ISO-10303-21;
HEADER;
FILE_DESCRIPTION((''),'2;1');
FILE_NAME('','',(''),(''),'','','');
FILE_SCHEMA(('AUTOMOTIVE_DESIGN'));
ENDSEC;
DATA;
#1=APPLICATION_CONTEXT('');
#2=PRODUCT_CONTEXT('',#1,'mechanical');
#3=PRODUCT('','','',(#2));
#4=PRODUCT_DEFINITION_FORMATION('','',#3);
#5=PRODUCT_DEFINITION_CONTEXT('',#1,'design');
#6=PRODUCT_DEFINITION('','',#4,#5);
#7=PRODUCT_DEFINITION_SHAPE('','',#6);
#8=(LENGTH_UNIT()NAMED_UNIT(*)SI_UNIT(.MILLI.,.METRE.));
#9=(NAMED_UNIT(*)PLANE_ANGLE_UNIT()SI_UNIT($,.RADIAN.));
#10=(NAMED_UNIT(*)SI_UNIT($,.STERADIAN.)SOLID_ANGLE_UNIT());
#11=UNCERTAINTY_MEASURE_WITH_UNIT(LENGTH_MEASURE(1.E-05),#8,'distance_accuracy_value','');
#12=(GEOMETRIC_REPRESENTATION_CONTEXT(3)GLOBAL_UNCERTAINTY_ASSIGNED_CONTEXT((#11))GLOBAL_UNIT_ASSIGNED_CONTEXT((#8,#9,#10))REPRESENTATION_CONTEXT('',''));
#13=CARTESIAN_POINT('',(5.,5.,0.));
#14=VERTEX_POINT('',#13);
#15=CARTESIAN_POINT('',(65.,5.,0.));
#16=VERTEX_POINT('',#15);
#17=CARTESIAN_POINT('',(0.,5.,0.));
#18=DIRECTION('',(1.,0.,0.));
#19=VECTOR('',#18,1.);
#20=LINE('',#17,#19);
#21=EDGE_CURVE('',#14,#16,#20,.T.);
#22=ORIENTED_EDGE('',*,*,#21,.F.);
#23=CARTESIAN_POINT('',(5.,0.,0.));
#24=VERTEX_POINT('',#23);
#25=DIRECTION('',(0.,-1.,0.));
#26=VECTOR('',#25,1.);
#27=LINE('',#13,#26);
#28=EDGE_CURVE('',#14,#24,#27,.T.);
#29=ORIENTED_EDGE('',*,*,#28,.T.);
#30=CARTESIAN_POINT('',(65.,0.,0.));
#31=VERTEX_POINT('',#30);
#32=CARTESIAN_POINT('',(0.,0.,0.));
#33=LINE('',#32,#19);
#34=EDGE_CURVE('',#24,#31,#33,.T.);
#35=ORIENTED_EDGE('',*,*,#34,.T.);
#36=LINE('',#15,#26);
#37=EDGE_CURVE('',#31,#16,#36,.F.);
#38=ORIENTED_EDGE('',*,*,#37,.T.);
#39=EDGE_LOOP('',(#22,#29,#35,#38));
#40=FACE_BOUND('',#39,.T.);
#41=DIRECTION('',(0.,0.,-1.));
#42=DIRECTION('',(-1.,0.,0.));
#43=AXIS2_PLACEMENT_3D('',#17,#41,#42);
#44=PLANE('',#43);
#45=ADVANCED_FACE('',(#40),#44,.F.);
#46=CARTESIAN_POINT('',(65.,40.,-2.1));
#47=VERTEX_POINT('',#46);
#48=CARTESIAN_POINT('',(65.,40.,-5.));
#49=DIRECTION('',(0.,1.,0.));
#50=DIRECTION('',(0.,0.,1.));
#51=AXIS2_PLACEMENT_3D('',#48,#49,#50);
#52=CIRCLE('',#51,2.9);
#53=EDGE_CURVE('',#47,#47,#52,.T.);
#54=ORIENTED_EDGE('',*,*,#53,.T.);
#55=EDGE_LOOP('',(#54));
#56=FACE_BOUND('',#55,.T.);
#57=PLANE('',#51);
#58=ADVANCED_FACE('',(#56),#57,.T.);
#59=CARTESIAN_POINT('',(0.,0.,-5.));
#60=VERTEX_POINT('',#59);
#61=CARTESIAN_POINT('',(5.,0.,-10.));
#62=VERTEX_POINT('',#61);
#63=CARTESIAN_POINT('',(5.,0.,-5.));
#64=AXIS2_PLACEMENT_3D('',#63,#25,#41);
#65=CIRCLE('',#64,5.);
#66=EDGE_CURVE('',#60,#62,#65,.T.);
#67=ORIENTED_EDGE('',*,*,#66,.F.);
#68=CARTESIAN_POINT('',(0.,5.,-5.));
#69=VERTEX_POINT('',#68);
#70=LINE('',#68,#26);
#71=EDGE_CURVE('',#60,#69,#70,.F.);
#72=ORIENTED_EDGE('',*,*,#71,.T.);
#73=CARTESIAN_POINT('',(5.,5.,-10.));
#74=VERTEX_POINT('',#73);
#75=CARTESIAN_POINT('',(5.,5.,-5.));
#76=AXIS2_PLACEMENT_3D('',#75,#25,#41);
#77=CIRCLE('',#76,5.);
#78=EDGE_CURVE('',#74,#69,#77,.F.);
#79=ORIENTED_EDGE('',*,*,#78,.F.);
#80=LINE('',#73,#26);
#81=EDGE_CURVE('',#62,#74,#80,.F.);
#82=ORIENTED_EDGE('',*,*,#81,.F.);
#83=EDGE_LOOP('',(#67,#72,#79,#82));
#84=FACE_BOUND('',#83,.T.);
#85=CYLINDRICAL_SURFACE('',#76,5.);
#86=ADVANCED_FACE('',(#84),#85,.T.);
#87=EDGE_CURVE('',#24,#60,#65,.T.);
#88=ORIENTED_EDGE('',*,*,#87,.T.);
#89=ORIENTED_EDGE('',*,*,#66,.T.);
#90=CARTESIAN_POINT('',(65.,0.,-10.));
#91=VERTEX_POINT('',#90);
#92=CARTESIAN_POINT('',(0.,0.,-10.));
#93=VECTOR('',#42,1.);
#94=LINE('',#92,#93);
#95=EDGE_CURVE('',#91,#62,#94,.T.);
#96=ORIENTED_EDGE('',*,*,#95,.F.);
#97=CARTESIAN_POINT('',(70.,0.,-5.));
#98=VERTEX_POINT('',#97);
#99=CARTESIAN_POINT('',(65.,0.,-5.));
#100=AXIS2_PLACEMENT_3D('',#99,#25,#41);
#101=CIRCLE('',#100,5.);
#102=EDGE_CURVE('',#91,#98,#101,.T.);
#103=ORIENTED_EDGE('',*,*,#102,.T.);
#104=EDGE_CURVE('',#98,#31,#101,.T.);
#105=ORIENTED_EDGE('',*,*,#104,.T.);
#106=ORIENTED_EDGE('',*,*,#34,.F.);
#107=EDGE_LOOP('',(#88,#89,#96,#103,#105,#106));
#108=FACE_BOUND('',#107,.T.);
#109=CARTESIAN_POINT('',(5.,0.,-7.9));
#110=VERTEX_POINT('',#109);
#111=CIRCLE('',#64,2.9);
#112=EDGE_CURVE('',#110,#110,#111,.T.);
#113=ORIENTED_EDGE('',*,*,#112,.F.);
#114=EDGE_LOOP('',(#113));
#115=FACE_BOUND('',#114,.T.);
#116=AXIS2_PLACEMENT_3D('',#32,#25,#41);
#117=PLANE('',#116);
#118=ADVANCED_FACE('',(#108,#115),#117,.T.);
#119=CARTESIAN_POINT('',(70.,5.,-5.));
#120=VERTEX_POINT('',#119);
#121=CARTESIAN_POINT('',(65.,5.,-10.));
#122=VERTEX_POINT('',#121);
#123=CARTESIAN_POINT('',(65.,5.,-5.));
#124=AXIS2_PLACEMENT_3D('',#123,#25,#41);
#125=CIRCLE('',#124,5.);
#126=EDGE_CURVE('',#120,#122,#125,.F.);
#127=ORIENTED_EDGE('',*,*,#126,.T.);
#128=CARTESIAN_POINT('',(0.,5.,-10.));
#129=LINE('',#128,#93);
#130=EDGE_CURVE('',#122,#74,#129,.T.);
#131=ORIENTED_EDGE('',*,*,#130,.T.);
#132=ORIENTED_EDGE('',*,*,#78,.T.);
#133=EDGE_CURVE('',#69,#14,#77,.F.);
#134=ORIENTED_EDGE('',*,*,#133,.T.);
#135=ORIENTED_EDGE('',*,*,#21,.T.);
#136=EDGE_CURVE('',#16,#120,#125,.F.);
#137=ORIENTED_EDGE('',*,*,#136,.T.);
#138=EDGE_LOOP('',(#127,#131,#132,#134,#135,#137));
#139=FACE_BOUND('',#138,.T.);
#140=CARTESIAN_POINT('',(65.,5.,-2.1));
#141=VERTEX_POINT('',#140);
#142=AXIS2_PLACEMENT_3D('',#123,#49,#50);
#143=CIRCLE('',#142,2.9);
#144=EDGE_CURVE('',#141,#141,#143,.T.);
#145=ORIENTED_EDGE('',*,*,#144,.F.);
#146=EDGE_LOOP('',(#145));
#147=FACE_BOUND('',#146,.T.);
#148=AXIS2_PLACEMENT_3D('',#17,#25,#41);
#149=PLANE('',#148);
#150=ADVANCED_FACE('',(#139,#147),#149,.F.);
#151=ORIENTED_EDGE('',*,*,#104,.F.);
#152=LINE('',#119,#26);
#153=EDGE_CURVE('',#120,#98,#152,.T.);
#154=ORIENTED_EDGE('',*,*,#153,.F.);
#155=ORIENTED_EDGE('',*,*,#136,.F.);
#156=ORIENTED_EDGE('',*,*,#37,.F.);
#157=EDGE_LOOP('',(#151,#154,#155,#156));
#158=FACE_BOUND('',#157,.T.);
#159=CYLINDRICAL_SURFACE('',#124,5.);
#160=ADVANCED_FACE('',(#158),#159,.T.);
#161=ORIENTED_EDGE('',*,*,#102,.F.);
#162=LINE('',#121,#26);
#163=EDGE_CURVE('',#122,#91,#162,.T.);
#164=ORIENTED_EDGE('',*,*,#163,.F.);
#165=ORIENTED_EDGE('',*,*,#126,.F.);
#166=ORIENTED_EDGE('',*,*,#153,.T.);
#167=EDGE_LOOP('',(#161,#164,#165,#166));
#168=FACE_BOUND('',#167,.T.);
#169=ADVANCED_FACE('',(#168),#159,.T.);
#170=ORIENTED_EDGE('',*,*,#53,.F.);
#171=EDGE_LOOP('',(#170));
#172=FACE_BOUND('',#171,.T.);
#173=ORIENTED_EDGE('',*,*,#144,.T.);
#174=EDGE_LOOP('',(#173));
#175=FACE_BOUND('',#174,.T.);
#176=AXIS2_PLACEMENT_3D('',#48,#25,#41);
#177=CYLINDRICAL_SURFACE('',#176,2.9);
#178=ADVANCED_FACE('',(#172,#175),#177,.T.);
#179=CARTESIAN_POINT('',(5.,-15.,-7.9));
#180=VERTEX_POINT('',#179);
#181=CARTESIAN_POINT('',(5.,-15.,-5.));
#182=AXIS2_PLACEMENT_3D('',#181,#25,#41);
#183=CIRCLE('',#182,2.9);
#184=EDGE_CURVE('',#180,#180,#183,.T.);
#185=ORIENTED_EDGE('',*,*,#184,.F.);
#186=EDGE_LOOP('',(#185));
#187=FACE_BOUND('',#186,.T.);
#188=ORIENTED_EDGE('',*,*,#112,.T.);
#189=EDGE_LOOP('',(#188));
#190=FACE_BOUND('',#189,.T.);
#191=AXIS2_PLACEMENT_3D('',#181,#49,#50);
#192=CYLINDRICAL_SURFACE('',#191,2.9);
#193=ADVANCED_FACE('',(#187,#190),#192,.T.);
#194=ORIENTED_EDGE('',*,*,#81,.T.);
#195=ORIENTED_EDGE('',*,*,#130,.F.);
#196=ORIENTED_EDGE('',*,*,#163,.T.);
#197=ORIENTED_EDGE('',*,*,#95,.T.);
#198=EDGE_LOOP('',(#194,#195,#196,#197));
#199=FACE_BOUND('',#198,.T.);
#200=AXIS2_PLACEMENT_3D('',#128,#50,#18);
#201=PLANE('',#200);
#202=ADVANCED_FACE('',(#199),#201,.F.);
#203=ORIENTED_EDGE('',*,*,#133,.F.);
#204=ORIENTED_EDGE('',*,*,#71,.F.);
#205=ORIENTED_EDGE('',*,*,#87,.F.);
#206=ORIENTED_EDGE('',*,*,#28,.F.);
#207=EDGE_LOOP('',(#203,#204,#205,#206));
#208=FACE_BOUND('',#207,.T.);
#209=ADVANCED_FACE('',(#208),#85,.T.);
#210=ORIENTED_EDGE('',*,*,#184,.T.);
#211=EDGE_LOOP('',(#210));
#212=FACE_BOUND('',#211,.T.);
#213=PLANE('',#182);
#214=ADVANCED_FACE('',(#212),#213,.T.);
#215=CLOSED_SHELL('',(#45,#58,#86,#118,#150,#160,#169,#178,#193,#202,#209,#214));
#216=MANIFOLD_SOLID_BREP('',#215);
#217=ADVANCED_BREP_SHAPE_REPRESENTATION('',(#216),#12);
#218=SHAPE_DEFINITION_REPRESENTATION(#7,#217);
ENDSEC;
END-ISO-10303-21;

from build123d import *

# Parameters (mm, degrees)
SKETCH1_W           = 70
SKETCH1_H           = 10
BOSS_EXTRUDE1_DEPTH = 5
FILLET1_R           = 5
SKETCH2_R           = 2.9
BOSS_EXTRUDE2_DEPTH = 15
SKETCH3_R           = 2.9
BOSS_EXTRUDE3_DEPTH = 35


with BuildPart() as part:
    # Sketch1 → Boss-Extrude1 (new body)
    with BuildSketch(Plane(origin=(0, 0, 0), x_dir=(1, 0, 0), z_dir=(0, 1, 0))):
        with Locations((35, 5)):
            Rectangle(SKETCH1_W, SKETCH1_H)
    extrude(amount=BOSS_EXTRUDE1_DEPTH)

    # Fillet1
    fillet1_edges = [part.edges().sort_by_distance(p)[0] for p in [
        (70, 2.5, -10),
        (70, 2.5, 0),
        (0, 2.5, -10),
        (0, 2.5, 0),
    ]]
    fillet(fillet1_edges, radius=FILLET1_R - 0.0001)  # a hair under: the kernel refuses the full size

    # Sketch2 → Boss-Extrude2 (add)
    with BuildSketch(Plane.XZ):
        with Locations(Location((5, -5, 0), (0, 0, 270))):
            Circle(SKETCH2_R)
    extrude(amount=BOSS_EXTRUDE2_DEPTH)

    # Sketch3 → Boss-Extrude3 (add)
    with BuildSketch(Plane(origin=(0, 5, 0), x_dir=(1, 0, 0), z_dir=(0, 1, 0))):
        with Locations(Location((65, 5, 0), (0, 0, 270))):
            Circle(SKETCH3_R)
    extrude(amount=BOSS_EXTRUDE3_DEPTH)


solid = part.part
